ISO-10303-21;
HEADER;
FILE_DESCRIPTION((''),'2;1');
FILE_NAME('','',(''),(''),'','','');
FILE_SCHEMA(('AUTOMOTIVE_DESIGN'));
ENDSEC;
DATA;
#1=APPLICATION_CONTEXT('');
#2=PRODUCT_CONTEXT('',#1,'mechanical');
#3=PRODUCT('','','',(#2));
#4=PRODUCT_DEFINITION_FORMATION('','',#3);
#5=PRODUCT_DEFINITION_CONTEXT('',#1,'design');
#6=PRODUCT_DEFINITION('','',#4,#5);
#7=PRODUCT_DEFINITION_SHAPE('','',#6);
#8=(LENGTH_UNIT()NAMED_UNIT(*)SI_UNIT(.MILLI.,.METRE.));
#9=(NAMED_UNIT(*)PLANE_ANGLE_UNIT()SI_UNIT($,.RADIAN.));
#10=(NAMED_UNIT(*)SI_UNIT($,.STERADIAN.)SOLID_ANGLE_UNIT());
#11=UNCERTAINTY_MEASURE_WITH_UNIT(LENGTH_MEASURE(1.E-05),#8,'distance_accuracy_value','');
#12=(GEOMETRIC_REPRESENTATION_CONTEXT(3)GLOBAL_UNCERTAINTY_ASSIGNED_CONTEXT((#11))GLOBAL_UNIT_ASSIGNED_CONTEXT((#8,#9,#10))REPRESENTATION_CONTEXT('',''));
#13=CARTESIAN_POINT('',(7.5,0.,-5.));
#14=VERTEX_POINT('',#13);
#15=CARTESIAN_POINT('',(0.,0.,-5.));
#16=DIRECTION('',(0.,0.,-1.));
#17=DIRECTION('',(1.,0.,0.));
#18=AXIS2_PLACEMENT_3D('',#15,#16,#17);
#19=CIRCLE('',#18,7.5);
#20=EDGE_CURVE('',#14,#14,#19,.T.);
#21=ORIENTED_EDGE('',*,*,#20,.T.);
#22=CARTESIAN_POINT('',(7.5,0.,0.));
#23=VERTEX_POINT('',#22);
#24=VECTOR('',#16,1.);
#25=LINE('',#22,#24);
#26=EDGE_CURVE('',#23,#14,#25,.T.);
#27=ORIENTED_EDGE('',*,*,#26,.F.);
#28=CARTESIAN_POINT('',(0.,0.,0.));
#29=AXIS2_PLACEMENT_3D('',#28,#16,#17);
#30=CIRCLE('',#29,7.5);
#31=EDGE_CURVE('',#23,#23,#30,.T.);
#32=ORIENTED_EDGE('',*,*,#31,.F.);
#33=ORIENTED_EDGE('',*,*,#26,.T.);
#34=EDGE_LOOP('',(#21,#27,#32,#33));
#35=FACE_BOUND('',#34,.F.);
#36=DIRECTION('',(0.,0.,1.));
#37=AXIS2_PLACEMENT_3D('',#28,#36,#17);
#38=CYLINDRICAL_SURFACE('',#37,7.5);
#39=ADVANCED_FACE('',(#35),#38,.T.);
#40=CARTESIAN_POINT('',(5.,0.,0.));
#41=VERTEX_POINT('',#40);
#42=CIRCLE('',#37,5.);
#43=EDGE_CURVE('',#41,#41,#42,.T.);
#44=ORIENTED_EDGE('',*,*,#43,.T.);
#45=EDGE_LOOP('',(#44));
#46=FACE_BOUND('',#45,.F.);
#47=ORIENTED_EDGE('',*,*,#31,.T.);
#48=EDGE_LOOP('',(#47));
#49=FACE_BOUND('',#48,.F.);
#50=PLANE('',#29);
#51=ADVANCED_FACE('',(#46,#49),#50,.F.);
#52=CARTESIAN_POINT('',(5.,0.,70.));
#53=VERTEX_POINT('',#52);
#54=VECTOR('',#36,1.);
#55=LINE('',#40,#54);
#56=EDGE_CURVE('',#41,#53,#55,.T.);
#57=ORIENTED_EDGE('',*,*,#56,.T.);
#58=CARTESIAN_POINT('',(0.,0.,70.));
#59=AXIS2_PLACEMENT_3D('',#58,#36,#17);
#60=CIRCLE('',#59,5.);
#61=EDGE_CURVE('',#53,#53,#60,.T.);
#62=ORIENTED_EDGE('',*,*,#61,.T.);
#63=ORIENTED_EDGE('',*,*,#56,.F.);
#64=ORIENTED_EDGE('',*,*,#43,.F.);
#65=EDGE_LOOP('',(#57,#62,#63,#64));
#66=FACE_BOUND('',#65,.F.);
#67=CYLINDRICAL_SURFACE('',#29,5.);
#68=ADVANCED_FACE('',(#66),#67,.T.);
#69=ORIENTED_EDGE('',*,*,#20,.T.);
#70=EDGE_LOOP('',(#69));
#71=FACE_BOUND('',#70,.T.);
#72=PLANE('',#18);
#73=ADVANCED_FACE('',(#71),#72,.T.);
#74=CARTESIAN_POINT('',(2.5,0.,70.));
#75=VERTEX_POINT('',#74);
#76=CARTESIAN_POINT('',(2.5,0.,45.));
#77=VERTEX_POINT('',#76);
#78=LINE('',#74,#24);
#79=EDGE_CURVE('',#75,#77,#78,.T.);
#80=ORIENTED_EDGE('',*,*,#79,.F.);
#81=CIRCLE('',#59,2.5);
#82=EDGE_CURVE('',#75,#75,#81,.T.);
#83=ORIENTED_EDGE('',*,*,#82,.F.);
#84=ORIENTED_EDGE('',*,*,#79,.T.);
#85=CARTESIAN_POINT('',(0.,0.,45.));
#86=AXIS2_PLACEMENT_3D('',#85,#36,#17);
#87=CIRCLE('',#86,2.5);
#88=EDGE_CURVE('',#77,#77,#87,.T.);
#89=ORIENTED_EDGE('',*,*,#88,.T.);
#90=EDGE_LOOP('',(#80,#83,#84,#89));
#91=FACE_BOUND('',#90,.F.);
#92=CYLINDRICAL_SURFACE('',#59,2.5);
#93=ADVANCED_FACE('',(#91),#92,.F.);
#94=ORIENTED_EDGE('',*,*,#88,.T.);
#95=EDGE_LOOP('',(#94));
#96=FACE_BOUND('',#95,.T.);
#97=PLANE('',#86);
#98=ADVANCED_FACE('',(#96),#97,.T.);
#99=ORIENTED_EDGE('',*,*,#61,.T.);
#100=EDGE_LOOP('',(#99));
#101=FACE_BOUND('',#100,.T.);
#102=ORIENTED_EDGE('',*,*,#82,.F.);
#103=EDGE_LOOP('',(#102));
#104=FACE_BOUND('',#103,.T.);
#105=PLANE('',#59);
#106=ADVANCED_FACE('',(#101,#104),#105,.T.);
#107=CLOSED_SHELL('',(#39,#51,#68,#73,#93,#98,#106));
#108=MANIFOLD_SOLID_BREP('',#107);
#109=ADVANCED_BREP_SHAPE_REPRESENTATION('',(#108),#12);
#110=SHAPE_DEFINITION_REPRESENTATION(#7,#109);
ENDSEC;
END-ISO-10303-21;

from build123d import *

# Parameters (mm, degrees)
F0_R     = 5
F1_DEPTH = 70
F2_R     = 7.5
F2_R_2   = 5
F3_DEPTH = 5
F4_R     = 2.5
F5_DEPTH = 25


with BuildPart() as f1:
    # F0 (on Top) → F1 (new body)
    with BuildSketch(Plane.XY):
        Circle(F0_R)
    extrude(amount=F1_DEPTH)

    # F2 (on face) → F3 (join)
    with BuildSketch(Plane(origin=(0, 0, 0), x_dir=(1, 0, 0), z_dir=(0, 0, -1))):
        Circle(F2_R)
        Circle(F2_R_2, mode=Mode.SUBTRACT)
        Circle(F2_R_2)
    extrude(amount=F3_DEPTH)

    # F4 (on face) → F5 (cut)
    with BuildSketch(Plane.XY.offset(70)):
        Circle(F4_R)
    extrude(amount=-F5_DEPTH, mode=Mode.SUBTRACT)


solid = f1.part
